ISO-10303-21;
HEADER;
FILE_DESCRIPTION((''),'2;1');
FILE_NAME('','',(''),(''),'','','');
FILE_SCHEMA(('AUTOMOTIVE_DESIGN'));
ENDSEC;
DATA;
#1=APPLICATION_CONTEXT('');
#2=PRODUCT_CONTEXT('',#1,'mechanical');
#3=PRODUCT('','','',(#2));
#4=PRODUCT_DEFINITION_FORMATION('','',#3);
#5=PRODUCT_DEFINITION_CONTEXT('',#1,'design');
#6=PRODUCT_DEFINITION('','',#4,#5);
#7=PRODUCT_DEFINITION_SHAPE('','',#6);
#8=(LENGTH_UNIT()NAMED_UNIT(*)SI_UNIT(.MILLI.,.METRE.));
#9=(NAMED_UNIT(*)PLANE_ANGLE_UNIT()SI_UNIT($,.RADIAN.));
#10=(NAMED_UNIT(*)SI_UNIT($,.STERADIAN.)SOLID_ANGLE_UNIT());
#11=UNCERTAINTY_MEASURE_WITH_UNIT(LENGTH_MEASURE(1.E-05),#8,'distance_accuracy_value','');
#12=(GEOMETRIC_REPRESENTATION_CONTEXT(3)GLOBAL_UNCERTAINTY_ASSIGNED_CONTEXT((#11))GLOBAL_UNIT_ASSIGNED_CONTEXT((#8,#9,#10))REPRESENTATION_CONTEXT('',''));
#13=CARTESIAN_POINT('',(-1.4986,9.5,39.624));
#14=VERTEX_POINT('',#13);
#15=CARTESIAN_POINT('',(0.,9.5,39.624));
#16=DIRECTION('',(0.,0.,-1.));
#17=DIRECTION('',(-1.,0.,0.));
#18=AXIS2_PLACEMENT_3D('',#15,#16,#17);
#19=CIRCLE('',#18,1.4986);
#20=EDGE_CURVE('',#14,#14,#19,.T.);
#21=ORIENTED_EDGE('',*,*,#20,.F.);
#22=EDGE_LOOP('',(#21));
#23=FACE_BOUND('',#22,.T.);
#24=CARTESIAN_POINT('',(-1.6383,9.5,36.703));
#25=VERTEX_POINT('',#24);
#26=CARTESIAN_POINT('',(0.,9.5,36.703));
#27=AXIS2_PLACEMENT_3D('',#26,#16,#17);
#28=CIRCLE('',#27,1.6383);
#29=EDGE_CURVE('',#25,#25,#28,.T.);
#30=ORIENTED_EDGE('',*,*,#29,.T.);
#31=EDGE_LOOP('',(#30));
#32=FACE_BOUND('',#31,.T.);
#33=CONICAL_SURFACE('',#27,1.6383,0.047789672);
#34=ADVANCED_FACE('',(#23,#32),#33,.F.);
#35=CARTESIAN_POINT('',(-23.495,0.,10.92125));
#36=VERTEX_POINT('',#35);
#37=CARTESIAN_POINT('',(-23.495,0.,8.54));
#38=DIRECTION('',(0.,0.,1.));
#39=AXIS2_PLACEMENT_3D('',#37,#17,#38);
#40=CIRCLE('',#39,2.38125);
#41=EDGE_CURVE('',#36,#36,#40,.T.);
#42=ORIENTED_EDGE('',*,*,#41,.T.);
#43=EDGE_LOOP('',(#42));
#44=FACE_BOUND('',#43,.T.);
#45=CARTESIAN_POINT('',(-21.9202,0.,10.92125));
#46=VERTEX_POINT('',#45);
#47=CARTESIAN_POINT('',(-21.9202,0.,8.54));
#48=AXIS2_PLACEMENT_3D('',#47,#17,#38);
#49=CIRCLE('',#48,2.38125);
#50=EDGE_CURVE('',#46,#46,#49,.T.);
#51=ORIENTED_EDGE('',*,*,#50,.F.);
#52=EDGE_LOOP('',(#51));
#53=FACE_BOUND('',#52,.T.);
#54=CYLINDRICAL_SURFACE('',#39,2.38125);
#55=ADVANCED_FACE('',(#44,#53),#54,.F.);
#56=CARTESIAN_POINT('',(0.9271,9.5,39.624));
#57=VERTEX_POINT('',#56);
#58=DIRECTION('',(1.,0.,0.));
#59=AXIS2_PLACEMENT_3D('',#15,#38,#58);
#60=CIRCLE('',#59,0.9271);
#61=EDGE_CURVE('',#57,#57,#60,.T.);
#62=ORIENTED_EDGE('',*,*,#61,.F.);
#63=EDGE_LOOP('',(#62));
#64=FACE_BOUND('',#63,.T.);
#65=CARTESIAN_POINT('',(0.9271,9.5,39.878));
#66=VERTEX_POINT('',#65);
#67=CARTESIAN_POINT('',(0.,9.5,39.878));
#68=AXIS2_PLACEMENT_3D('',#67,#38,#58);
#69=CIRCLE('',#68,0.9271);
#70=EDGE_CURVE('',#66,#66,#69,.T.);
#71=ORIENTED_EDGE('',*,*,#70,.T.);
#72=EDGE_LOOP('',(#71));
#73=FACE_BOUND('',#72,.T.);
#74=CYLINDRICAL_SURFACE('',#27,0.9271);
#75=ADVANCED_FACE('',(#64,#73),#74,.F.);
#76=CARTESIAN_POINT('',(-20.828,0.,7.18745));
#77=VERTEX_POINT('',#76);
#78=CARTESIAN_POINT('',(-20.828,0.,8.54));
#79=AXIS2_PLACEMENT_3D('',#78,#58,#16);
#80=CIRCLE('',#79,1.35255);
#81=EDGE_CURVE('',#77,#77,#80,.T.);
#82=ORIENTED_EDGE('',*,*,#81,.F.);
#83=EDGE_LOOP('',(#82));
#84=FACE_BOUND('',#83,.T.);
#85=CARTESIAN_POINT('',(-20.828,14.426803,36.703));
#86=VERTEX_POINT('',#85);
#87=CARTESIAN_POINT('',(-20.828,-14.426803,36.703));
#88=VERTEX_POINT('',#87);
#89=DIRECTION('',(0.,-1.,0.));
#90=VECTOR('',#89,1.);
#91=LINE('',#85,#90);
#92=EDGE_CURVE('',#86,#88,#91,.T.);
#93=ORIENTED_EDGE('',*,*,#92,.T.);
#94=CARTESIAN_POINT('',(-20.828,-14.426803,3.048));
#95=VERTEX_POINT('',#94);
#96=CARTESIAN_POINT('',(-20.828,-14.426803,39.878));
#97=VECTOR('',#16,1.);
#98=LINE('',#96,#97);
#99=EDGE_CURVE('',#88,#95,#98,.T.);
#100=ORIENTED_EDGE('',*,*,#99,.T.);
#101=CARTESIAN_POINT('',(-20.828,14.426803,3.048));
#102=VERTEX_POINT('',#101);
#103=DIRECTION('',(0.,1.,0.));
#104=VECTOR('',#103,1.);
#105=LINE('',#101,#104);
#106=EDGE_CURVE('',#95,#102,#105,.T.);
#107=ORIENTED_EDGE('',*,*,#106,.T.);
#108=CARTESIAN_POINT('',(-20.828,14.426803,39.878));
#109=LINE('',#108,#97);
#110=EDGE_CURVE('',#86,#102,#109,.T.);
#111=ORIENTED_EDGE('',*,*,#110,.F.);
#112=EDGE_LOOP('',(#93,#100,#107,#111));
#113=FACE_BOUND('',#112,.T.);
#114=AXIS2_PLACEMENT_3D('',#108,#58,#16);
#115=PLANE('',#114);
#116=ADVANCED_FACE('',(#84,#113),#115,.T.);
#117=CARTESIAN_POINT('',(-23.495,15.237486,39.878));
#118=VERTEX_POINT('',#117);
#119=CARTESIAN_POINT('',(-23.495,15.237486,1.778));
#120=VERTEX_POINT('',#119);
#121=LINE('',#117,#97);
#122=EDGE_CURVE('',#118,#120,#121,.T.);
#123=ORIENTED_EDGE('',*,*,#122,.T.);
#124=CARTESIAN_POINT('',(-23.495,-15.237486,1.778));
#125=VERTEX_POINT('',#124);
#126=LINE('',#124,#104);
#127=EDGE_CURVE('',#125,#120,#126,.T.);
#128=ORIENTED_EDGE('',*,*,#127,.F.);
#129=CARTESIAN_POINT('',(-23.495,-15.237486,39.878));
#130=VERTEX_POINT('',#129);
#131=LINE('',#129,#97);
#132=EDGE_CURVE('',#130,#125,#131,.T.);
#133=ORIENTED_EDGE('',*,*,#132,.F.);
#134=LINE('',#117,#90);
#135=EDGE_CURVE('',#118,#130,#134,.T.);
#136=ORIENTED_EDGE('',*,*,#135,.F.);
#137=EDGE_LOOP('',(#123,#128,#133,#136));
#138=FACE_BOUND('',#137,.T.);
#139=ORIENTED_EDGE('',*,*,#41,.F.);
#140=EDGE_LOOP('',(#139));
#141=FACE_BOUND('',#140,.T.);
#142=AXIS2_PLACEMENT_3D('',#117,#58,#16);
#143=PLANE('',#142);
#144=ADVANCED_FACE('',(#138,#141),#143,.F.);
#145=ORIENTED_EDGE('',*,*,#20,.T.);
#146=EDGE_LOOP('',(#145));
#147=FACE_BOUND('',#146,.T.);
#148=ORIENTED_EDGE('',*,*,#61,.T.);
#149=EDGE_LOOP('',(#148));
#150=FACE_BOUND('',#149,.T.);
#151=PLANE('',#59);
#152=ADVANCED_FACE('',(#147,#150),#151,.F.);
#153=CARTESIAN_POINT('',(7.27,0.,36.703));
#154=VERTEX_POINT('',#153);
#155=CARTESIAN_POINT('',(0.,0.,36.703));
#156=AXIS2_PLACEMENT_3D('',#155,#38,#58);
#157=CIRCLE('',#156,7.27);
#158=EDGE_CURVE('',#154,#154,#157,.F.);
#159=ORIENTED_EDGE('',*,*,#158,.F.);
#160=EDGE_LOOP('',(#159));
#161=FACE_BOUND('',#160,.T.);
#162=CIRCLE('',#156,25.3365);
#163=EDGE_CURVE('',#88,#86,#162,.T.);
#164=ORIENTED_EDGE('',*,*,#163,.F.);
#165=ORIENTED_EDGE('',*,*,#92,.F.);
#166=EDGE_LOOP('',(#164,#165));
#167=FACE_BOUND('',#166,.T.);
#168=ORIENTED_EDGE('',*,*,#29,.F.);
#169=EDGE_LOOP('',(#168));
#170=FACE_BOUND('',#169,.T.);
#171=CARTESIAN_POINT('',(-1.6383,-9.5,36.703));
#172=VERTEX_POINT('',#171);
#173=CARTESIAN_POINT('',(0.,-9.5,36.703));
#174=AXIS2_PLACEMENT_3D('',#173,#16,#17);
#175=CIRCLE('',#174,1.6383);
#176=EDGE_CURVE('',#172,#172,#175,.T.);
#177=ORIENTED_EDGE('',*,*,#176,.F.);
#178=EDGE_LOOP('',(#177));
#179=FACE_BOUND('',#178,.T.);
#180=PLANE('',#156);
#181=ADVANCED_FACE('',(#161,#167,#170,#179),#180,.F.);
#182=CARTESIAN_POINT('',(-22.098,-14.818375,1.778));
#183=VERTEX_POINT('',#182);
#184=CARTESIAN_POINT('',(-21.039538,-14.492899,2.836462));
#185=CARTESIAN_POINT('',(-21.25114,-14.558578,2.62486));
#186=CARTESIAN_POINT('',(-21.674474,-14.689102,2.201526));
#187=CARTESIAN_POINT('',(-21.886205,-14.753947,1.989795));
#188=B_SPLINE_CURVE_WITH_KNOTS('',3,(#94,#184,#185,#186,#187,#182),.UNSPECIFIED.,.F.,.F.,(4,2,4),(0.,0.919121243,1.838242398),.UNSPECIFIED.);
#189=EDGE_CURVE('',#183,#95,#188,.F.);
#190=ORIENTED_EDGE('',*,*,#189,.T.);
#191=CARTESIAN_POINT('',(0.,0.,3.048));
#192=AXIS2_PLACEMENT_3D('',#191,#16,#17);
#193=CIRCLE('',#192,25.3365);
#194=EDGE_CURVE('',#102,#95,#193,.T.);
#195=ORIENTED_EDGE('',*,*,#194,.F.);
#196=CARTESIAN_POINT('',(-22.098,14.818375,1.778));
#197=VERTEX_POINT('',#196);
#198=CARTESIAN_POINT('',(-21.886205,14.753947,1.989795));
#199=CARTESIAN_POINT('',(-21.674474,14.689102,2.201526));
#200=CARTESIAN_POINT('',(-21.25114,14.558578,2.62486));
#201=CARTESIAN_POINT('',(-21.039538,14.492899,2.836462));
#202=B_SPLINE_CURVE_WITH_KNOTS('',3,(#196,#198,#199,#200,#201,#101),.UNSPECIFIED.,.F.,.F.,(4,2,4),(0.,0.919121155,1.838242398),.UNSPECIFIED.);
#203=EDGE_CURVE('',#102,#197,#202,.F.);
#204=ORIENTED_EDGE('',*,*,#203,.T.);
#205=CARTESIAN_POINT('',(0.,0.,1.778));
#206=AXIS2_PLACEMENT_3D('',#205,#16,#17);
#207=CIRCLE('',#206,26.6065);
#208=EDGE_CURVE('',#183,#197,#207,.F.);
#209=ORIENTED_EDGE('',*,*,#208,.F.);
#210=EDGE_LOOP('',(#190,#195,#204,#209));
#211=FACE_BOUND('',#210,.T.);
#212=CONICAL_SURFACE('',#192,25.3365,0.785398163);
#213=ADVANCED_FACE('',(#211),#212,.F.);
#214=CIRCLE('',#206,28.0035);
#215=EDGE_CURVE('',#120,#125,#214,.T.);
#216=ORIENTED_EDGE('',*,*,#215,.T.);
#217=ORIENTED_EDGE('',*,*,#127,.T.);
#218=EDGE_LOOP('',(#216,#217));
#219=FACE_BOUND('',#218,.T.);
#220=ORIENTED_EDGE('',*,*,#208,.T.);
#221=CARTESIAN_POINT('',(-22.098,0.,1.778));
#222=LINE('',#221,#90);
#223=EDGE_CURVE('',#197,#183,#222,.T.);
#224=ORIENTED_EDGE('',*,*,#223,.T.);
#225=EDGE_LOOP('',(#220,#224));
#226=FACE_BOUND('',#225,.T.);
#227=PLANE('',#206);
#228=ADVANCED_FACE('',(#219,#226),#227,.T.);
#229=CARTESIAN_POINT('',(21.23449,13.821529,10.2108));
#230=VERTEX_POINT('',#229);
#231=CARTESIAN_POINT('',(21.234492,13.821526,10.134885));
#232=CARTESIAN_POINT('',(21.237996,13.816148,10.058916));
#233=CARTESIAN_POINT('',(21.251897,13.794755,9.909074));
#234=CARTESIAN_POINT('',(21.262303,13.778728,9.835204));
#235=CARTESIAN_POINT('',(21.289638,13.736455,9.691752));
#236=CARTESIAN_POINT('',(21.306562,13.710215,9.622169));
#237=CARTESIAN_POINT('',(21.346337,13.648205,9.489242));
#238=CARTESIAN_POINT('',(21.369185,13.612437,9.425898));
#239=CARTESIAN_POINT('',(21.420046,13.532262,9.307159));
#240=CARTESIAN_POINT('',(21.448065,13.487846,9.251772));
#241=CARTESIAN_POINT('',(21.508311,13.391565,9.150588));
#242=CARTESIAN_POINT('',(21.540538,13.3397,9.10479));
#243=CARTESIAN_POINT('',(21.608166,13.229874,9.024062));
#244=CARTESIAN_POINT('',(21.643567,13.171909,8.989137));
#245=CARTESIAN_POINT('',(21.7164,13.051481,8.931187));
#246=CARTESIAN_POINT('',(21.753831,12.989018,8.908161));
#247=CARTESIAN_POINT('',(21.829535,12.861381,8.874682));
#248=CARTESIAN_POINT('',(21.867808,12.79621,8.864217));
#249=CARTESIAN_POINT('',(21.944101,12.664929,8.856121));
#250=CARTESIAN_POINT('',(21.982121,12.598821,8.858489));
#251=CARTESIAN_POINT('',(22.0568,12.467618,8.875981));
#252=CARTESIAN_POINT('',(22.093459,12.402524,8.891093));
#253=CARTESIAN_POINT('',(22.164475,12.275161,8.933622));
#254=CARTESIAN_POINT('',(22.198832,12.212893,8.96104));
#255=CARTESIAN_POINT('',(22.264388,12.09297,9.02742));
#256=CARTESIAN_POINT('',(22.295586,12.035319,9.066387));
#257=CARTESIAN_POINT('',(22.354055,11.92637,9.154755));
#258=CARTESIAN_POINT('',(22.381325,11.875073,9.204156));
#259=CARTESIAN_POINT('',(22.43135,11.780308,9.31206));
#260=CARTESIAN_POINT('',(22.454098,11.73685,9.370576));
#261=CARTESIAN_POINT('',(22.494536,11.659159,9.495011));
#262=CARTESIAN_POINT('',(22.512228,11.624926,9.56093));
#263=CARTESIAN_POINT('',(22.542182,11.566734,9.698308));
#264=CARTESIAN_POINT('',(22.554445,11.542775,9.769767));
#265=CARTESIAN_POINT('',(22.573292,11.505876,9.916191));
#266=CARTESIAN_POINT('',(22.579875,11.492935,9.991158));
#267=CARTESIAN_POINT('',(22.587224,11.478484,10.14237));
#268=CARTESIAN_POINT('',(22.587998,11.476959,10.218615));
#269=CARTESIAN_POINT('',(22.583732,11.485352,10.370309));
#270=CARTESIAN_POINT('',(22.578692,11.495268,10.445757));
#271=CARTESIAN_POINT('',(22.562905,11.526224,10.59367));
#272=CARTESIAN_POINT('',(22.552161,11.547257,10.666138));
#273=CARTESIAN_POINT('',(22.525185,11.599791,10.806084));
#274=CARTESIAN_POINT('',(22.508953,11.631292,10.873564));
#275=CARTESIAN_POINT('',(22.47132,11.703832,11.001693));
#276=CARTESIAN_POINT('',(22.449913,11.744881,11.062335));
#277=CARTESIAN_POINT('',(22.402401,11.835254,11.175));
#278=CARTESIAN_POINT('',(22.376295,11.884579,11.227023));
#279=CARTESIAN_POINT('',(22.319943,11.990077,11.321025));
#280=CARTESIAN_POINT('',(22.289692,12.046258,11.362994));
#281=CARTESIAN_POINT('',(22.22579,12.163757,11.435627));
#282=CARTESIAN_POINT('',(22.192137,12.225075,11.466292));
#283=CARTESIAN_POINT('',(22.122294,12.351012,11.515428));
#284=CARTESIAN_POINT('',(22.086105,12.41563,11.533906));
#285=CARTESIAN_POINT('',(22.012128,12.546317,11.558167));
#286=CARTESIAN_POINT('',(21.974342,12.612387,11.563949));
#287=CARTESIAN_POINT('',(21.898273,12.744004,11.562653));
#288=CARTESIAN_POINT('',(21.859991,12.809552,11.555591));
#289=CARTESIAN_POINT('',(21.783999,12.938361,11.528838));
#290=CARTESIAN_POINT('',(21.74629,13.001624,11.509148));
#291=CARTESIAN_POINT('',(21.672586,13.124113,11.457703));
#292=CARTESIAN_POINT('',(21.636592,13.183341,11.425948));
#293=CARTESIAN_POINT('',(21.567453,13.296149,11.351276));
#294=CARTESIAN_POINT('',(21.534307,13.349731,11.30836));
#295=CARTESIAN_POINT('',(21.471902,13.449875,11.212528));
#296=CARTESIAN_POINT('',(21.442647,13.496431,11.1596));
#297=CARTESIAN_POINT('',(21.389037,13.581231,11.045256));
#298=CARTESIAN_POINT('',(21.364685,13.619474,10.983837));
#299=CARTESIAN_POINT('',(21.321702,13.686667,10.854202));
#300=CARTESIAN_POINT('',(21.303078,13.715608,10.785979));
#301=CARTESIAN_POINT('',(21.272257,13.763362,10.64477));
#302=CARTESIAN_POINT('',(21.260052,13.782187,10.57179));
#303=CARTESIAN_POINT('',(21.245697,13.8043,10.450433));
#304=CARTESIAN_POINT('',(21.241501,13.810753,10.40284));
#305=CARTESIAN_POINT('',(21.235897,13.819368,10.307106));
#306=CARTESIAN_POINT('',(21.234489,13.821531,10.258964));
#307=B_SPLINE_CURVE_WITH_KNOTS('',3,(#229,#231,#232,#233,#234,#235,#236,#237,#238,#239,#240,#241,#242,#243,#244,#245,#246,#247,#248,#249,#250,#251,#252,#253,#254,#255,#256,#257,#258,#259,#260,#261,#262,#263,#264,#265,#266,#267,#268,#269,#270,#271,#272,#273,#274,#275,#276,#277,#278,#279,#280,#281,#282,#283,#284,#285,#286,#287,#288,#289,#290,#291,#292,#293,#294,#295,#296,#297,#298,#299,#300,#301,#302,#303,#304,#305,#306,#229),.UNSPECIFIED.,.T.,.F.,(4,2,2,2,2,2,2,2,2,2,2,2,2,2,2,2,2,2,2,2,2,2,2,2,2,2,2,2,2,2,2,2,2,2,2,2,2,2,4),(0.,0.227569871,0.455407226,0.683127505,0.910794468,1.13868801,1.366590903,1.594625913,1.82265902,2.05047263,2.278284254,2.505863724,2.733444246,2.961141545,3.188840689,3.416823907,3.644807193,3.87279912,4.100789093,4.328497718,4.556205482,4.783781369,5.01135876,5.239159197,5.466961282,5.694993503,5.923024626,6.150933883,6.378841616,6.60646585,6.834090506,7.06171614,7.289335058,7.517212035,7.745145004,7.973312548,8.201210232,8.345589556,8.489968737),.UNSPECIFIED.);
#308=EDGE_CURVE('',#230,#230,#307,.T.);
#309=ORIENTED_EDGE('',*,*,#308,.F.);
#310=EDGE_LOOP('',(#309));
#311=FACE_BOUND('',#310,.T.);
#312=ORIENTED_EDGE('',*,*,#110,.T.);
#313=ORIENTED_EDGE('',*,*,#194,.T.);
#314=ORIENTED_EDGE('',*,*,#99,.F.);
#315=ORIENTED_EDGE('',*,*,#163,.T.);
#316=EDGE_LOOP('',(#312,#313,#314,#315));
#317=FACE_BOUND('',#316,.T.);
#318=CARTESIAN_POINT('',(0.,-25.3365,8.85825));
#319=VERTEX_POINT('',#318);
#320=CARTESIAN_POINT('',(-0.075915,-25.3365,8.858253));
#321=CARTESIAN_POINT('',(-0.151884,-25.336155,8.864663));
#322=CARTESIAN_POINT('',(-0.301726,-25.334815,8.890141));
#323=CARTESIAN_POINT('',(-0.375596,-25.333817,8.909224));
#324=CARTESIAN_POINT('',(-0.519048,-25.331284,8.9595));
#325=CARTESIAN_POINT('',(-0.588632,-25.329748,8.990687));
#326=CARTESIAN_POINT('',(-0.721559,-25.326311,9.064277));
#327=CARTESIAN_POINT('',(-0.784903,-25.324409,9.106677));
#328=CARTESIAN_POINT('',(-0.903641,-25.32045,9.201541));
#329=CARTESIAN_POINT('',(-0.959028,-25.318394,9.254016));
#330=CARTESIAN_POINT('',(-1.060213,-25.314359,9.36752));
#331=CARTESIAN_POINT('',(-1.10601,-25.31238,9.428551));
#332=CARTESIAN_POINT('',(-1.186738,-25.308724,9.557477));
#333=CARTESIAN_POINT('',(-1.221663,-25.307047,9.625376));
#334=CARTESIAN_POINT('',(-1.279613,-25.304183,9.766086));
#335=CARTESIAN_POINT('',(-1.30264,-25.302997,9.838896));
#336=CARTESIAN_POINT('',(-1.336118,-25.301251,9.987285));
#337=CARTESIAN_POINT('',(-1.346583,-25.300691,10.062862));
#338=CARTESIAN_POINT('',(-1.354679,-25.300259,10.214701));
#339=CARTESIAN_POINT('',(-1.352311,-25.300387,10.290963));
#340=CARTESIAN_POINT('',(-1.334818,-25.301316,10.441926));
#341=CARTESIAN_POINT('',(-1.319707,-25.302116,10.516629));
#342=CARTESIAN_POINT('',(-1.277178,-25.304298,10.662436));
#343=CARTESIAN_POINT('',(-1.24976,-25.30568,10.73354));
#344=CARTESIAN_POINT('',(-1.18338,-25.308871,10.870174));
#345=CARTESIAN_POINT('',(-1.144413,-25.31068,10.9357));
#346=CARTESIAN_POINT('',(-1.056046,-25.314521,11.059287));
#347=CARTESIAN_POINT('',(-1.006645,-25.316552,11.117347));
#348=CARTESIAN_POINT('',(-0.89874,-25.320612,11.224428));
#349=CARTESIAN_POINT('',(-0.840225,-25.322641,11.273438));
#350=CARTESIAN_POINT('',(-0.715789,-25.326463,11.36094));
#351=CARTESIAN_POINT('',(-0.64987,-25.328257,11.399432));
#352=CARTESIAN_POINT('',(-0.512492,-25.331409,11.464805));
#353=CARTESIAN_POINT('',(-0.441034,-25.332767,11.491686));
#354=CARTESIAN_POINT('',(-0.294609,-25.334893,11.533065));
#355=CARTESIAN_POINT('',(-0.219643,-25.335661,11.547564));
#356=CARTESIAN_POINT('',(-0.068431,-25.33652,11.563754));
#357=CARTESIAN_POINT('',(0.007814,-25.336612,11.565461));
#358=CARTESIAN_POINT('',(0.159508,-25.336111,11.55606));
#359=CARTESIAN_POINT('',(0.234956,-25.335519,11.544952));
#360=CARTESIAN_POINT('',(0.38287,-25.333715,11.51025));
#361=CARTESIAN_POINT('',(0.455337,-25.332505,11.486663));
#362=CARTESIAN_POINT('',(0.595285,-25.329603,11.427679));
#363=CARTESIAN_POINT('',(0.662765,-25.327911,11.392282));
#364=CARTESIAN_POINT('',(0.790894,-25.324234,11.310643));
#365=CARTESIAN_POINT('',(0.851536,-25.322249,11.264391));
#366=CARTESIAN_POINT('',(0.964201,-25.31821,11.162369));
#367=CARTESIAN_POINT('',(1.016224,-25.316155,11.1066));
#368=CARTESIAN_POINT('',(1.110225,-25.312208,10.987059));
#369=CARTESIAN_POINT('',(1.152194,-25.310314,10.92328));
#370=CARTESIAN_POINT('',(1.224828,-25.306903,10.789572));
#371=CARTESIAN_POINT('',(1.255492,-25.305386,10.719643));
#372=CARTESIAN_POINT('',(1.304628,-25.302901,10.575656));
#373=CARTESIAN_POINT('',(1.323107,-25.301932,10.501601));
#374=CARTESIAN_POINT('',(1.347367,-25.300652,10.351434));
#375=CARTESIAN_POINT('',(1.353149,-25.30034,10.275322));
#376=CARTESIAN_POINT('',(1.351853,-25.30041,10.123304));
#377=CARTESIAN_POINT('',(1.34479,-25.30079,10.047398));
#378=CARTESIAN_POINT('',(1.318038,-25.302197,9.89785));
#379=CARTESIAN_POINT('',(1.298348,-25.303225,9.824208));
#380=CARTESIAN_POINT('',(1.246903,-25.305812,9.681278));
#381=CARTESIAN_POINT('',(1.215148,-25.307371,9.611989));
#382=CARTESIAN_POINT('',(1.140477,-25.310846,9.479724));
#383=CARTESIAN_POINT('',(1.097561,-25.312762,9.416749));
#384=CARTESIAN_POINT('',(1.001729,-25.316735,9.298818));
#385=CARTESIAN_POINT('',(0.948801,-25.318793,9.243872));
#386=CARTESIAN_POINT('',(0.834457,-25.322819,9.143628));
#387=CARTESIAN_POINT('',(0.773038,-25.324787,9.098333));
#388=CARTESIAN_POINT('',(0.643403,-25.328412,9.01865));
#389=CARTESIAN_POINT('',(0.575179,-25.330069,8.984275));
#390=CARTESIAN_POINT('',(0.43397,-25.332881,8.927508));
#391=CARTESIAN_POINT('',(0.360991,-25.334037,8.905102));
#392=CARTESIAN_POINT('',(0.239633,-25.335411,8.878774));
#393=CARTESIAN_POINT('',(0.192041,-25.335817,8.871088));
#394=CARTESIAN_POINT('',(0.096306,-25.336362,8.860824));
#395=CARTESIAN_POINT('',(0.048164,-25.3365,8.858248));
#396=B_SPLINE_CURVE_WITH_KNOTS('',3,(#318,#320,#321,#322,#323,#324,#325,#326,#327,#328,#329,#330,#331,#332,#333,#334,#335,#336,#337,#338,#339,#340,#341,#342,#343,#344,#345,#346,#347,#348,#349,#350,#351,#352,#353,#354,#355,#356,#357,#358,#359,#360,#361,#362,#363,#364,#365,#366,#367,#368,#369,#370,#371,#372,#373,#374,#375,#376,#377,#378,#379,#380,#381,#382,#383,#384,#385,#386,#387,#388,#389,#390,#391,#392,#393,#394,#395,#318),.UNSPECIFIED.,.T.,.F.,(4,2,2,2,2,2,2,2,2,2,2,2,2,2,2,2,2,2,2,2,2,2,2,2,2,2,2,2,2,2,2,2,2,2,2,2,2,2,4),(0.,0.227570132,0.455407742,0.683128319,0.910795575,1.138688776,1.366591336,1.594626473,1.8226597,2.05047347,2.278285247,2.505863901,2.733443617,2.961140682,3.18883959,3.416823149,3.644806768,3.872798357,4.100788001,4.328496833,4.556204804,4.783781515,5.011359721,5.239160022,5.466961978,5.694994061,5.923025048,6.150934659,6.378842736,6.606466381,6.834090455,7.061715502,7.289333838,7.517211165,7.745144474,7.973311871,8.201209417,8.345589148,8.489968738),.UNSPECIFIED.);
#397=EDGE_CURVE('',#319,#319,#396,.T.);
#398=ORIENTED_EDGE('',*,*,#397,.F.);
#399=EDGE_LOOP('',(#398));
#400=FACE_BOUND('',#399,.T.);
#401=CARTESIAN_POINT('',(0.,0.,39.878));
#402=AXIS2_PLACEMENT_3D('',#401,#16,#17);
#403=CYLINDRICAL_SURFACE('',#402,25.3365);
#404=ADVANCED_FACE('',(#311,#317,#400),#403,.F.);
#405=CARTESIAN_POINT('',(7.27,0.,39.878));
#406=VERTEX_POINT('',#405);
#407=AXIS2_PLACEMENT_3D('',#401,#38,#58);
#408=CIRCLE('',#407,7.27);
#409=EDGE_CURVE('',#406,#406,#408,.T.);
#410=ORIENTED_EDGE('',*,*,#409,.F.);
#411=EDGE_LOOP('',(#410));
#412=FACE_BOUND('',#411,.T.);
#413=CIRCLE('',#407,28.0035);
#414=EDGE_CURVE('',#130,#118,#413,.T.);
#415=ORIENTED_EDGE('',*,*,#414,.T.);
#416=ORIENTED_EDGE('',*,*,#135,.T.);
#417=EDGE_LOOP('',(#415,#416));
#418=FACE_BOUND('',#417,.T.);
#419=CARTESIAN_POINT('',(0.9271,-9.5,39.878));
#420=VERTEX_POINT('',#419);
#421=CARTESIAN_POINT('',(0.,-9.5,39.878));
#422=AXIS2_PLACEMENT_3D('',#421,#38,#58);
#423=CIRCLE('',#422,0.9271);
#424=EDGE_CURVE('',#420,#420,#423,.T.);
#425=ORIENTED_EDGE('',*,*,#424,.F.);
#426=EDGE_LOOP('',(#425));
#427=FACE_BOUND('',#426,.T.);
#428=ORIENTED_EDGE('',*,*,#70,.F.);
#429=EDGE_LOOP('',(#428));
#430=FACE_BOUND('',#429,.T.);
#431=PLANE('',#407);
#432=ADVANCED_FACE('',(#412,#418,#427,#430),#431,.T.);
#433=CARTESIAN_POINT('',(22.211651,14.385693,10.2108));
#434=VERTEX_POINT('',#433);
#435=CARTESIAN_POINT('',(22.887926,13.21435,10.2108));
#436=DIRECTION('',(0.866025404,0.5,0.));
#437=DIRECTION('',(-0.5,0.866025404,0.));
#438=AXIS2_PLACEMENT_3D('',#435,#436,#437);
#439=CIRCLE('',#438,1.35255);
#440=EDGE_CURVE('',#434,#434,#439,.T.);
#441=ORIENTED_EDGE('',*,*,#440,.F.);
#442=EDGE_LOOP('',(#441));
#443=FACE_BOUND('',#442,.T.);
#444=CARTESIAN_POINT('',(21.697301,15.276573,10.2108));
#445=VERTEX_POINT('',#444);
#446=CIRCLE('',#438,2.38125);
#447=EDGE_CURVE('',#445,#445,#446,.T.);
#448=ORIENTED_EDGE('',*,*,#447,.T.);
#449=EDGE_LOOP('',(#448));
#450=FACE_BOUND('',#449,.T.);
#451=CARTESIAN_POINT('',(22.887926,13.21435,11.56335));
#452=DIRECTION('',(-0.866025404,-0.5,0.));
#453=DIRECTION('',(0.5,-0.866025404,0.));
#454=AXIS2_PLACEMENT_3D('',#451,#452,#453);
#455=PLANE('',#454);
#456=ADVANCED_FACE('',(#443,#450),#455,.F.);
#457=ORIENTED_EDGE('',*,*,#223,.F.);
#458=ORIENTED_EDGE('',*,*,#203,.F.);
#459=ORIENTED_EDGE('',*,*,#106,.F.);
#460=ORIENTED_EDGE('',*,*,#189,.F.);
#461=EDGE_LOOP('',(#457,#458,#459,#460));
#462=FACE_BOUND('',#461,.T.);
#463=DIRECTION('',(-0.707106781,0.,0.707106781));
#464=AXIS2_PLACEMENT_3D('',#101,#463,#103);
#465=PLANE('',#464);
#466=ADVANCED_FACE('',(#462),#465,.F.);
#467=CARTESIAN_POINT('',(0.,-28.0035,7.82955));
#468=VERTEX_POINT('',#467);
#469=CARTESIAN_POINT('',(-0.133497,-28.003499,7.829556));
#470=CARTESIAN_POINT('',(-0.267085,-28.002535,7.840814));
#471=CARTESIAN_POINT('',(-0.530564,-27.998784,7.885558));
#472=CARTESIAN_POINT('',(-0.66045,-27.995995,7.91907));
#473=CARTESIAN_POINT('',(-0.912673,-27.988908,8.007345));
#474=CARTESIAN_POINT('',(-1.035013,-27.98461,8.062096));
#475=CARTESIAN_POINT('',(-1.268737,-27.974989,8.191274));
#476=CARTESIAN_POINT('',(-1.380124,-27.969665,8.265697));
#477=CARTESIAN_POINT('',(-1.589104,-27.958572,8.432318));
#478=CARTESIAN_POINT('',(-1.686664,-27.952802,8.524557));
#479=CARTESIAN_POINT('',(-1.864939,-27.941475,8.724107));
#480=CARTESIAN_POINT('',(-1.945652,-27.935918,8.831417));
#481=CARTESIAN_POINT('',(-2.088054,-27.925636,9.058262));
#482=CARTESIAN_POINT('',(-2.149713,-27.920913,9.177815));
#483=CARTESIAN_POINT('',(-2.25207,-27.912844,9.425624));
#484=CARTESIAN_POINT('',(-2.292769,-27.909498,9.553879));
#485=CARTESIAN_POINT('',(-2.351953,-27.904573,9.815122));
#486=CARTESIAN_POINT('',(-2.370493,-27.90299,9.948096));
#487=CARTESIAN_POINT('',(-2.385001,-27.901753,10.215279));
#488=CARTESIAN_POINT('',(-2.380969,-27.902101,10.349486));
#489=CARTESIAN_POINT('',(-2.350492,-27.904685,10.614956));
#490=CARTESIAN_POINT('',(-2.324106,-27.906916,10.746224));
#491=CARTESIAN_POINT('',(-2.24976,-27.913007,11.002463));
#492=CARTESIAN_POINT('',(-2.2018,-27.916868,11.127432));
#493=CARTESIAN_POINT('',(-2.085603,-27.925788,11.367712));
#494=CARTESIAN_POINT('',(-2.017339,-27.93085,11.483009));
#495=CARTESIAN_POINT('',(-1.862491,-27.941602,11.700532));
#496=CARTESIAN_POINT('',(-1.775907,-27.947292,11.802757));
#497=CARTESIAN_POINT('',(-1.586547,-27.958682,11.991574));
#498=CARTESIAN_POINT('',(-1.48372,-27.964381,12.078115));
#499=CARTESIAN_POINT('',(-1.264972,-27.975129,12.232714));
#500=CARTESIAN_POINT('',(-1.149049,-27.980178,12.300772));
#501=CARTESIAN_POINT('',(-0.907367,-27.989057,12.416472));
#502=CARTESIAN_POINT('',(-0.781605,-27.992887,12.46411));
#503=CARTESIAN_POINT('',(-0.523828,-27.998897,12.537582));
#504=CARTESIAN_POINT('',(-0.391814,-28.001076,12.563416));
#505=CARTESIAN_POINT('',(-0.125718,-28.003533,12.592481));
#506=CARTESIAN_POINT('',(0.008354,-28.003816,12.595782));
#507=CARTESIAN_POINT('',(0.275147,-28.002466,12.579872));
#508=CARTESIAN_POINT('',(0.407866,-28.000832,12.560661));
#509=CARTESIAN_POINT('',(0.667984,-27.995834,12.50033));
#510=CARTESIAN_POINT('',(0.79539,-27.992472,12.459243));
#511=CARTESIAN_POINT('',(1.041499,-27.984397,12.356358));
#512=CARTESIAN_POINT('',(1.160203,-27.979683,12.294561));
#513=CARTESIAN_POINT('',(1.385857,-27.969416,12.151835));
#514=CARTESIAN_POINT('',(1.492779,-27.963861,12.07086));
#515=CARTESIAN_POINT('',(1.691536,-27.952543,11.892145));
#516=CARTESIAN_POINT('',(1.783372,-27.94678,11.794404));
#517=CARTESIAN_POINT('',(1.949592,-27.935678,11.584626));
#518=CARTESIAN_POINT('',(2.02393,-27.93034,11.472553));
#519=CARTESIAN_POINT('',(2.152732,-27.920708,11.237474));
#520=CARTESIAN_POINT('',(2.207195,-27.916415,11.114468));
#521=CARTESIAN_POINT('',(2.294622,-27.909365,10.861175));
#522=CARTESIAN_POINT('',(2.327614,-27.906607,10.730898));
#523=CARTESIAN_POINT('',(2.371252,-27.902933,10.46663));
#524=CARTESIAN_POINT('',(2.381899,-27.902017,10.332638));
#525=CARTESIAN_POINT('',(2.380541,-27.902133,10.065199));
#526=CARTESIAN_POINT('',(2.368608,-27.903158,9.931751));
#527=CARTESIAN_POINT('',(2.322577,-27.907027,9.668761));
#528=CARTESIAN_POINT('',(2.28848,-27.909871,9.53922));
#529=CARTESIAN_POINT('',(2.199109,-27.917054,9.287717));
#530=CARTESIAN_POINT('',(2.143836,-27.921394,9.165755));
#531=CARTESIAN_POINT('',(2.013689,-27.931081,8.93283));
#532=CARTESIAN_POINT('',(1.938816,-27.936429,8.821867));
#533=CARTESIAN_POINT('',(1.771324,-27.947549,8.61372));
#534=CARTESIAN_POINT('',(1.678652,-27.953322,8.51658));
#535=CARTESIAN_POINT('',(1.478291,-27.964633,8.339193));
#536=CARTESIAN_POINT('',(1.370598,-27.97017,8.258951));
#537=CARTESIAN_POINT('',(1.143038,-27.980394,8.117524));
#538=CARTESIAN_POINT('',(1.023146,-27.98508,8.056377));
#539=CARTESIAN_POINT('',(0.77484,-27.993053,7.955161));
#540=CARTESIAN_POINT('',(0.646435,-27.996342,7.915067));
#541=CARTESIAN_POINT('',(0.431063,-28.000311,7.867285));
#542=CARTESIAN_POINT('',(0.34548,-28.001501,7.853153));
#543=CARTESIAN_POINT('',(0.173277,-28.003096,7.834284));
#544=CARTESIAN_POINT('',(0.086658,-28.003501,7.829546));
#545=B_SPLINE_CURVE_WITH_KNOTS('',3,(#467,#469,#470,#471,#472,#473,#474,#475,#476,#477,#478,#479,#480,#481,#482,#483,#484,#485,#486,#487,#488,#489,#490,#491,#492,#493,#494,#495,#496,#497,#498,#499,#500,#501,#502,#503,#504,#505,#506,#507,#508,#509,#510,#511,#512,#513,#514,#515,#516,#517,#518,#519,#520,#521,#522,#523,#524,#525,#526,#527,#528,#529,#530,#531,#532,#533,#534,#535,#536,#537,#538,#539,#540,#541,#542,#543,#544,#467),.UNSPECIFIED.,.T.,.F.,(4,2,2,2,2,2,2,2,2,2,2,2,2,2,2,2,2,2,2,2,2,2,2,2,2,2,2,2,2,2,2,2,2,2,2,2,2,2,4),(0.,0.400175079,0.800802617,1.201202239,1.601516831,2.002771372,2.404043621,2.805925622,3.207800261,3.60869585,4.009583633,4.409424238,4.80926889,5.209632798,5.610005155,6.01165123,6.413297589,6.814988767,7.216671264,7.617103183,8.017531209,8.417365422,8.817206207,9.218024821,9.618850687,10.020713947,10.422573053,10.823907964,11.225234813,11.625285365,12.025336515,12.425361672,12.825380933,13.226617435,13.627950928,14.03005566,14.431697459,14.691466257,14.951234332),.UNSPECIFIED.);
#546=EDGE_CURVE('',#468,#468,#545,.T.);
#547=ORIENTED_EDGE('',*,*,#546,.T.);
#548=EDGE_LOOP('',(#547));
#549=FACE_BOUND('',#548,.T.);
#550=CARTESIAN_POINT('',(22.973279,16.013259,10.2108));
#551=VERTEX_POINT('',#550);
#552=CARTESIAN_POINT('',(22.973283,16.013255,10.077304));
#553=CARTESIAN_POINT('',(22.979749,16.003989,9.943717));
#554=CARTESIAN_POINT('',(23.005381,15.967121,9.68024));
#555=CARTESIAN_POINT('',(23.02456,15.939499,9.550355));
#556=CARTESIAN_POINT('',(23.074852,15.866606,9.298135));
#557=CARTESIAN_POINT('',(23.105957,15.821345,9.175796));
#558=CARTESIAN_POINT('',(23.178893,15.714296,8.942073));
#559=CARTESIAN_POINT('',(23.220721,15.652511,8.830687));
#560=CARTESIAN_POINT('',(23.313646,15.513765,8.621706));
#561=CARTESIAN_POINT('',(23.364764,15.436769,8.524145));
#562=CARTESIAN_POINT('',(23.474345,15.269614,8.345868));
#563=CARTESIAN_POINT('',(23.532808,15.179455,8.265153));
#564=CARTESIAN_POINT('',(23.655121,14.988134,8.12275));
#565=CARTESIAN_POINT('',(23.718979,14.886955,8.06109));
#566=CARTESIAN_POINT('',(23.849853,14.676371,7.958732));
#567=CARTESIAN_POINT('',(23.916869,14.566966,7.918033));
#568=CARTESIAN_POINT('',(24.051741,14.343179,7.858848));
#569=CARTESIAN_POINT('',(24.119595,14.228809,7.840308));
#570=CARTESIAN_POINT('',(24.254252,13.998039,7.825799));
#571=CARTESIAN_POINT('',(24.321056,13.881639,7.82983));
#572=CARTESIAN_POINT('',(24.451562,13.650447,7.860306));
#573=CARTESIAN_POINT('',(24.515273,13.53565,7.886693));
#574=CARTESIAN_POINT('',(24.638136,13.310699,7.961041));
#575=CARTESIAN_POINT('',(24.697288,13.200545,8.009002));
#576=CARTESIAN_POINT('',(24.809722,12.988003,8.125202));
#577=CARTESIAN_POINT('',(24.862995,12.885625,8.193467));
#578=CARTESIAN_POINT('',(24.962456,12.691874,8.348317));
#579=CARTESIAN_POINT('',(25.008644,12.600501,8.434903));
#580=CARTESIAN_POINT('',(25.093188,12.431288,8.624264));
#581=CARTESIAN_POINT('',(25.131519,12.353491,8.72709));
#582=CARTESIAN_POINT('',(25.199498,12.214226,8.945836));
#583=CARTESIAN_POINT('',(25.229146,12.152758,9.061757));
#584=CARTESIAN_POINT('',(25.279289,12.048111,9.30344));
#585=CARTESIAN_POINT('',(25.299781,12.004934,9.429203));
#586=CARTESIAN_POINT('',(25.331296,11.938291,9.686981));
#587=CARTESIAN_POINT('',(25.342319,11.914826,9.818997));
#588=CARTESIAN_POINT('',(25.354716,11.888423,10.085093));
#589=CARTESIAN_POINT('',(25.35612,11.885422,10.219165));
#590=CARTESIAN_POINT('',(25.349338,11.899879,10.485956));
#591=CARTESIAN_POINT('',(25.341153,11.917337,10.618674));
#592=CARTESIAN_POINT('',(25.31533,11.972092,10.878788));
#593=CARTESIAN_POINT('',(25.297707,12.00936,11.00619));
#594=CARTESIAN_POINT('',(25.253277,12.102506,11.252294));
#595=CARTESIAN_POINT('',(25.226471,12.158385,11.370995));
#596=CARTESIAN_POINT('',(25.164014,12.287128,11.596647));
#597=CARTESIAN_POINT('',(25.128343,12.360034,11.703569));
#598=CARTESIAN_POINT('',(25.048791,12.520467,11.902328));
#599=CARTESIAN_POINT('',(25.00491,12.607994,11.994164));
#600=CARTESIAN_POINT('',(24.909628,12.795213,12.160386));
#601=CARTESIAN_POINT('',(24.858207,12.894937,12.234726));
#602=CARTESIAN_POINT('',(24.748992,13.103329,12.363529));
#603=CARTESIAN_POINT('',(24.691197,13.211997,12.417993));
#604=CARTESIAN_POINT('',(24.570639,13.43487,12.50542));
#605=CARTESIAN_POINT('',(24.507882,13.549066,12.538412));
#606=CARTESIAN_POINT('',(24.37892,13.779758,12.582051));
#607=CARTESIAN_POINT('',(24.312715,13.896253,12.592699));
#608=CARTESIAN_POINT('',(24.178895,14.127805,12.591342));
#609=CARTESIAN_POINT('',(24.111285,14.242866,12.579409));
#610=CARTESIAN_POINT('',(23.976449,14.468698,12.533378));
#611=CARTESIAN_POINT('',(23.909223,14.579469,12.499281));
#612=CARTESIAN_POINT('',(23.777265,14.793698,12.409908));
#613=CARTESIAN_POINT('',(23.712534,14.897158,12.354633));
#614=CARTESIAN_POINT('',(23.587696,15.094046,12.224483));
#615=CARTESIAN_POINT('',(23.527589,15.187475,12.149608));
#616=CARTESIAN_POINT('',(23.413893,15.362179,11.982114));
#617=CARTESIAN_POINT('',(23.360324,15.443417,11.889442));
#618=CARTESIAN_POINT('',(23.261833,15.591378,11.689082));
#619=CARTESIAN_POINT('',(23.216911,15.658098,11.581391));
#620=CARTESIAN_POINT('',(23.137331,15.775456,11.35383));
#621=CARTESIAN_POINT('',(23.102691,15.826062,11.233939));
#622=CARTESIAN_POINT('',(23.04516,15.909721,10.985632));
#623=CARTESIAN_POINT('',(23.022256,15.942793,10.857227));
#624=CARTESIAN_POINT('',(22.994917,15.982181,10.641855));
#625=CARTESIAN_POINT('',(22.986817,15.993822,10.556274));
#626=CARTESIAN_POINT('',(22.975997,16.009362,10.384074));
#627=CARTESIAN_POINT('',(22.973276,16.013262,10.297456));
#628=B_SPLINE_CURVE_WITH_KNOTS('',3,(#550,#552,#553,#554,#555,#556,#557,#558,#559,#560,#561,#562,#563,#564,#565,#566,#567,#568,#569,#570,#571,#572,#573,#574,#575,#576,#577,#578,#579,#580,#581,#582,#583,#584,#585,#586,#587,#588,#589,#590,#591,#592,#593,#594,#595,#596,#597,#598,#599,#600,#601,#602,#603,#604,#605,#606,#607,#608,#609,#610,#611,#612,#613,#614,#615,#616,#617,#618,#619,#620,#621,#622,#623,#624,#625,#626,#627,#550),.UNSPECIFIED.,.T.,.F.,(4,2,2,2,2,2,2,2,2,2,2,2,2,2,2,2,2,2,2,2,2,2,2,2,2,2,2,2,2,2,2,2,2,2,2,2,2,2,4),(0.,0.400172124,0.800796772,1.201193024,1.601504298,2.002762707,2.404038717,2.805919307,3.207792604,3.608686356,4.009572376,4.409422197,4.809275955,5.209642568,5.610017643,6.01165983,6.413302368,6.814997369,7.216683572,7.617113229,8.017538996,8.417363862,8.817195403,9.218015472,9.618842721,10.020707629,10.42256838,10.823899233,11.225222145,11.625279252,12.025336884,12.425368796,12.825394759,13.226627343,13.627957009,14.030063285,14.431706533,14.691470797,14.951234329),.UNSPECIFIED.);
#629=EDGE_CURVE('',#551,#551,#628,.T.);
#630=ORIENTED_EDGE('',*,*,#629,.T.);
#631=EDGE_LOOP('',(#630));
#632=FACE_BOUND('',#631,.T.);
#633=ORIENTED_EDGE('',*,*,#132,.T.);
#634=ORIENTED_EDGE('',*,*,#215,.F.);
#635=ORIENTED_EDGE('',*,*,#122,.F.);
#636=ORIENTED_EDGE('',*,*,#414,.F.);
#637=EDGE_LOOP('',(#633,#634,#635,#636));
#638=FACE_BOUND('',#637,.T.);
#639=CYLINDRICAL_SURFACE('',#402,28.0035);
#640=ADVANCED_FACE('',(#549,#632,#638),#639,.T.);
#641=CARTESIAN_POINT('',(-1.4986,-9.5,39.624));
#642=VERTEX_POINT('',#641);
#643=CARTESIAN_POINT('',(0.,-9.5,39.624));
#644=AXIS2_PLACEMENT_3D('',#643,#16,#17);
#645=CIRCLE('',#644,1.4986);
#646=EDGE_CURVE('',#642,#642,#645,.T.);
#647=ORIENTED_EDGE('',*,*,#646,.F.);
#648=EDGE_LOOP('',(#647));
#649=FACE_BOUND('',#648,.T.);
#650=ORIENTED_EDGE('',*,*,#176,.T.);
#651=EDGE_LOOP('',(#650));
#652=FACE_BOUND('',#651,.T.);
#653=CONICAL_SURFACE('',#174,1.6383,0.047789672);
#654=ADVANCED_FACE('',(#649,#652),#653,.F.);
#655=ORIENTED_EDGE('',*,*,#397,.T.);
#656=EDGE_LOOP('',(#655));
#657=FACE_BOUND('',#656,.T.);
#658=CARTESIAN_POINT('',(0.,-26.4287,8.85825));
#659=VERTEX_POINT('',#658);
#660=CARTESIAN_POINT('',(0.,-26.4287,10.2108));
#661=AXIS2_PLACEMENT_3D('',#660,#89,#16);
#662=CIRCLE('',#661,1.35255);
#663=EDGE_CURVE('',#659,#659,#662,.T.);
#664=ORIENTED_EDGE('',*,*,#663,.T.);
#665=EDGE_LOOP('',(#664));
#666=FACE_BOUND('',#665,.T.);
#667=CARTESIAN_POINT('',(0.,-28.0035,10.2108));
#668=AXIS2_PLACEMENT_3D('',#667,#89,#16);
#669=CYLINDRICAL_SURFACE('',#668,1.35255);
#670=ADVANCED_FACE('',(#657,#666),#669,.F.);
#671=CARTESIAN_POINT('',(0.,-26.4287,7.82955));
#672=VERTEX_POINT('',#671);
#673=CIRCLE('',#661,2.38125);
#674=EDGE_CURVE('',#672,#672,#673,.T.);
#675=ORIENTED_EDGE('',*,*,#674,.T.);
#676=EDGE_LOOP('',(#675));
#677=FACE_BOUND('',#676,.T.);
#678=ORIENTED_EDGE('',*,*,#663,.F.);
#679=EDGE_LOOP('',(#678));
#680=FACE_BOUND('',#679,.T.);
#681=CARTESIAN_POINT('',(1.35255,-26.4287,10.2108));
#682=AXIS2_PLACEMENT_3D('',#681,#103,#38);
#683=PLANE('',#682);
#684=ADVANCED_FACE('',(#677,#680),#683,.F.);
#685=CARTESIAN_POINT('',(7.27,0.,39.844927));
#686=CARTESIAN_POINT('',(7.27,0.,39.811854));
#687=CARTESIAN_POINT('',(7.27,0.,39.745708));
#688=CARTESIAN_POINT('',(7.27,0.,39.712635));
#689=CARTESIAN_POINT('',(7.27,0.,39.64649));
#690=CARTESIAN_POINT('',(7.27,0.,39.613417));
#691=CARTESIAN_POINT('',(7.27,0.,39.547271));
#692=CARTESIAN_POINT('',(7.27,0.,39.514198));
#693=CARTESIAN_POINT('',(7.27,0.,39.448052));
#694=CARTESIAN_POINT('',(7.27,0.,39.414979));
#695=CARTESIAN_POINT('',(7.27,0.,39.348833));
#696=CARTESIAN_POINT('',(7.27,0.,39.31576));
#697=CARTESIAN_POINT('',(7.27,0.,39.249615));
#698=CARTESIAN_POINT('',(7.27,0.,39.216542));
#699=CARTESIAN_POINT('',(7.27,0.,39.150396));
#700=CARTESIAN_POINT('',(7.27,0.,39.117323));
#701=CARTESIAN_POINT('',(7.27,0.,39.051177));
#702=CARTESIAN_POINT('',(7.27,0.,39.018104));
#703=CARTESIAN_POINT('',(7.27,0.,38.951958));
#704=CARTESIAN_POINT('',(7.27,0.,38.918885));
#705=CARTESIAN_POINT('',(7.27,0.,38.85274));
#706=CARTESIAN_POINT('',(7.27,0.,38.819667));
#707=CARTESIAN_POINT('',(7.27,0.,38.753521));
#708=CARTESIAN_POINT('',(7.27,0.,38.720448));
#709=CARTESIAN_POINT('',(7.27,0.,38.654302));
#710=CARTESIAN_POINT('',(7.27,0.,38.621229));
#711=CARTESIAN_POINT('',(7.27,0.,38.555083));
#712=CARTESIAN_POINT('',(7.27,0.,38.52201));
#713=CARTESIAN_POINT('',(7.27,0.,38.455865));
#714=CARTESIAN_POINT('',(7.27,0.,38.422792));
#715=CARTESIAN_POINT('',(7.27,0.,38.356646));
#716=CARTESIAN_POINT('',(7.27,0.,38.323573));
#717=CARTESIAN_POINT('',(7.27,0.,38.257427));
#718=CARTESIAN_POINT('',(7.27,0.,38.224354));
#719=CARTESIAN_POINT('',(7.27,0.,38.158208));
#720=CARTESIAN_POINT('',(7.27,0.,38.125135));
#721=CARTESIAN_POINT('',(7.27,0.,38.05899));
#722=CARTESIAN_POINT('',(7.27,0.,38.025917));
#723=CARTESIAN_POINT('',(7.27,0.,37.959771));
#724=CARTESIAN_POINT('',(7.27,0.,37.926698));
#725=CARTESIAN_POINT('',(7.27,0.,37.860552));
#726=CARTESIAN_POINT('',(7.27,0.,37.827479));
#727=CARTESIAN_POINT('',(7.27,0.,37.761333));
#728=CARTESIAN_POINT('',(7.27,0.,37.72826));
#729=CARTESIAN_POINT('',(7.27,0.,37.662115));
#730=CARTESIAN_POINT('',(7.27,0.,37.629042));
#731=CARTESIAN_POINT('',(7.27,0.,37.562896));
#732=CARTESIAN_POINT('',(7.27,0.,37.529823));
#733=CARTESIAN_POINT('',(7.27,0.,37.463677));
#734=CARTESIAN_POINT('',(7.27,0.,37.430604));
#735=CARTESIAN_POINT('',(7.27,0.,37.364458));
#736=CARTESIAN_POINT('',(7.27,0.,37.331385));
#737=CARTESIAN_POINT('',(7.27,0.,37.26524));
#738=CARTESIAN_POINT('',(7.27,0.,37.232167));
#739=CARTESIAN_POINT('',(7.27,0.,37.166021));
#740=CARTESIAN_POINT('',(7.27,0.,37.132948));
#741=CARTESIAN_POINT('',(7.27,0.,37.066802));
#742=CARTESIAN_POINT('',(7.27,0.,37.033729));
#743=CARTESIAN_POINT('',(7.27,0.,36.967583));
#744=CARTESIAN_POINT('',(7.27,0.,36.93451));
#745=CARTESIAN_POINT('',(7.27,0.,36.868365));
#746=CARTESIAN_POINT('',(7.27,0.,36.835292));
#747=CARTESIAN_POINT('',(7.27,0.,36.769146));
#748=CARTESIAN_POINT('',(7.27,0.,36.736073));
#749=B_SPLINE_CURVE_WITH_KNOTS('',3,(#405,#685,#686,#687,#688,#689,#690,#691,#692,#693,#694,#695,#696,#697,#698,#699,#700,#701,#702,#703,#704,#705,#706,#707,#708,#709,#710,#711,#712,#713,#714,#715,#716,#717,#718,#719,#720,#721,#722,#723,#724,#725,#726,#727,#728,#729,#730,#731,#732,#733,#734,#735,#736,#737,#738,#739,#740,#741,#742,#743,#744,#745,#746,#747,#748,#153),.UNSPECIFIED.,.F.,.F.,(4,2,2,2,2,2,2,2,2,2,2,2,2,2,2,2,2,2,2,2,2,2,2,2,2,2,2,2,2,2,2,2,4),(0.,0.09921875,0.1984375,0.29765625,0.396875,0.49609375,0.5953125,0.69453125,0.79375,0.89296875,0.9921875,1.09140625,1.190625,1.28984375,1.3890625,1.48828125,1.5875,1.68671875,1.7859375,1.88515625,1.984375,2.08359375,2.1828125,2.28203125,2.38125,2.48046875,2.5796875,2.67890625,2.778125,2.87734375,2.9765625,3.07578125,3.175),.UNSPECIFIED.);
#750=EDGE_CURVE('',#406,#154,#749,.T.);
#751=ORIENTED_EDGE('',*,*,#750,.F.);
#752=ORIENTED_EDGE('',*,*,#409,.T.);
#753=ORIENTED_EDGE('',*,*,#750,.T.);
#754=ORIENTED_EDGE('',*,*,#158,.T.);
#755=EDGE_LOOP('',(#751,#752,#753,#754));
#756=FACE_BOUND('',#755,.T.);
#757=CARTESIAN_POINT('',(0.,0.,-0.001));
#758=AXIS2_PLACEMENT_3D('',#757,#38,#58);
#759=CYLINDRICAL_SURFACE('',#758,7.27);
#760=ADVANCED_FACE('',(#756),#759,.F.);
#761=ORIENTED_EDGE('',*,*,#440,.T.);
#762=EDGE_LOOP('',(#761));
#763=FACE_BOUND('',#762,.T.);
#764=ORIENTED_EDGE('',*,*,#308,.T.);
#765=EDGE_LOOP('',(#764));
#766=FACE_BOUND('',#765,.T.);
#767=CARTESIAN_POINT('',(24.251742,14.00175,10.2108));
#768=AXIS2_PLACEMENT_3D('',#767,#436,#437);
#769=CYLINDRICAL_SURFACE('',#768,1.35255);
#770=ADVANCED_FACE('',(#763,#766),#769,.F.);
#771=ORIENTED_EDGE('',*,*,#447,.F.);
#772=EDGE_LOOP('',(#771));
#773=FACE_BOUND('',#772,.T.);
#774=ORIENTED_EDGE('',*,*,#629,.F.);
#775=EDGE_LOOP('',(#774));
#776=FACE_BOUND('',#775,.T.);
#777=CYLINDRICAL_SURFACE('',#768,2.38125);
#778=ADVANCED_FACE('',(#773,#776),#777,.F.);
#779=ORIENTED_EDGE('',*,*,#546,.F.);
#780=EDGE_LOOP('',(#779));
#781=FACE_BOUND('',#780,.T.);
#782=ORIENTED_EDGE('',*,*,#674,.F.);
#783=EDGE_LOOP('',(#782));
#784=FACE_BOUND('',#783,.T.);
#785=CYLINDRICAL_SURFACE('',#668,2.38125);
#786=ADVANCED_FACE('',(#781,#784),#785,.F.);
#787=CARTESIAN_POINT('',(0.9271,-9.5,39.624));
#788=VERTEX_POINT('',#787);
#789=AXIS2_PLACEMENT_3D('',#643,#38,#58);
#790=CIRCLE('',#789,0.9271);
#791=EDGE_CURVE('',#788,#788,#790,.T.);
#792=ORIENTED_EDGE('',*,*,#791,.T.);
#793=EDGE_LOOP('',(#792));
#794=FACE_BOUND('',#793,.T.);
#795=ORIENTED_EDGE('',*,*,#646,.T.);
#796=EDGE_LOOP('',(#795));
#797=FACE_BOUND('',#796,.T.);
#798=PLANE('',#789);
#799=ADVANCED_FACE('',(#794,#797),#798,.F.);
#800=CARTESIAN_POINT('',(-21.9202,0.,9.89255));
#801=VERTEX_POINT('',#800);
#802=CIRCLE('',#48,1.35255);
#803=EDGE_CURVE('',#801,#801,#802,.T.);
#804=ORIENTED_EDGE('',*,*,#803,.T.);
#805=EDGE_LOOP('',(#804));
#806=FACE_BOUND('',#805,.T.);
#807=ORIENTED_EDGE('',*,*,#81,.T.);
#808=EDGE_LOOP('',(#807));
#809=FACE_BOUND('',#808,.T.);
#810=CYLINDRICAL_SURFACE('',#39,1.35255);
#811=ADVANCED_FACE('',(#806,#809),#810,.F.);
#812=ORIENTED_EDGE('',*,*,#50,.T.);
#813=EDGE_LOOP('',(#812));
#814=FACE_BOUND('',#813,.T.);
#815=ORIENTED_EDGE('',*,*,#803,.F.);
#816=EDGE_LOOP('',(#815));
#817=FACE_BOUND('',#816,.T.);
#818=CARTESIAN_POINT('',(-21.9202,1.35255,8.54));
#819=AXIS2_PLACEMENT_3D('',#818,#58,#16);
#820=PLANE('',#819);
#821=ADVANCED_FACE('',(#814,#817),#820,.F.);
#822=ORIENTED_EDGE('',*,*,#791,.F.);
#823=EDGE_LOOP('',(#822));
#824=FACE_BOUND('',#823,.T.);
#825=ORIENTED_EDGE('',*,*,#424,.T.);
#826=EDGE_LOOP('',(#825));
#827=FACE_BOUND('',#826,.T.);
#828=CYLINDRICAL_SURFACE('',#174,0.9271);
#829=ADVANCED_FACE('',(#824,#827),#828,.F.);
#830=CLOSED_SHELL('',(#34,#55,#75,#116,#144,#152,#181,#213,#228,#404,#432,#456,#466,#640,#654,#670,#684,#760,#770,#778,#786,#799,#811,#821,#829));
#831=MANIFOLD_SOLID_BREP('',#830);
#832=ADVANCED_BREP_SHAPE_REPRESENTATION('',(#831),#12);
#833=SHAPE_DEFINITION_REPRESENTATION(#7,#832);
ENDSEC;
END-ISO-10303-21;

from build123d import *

# Parameters (mm, degrees)
BOSS_EXTRUDE1_DEPTH                             = 39.878
BOSS_EXTRUDE2_START                             = -3.175
BOSS_EXTRUDE2_DEPTH                             = 3.175
CBORE_FOR_2_PAN_HEAD_MACHINE_SCREW1_D           = 2.7051
CBORE_FOR_2_PAN_HEAD_MACHINE_SCREW1_DEPTH       = 2.667
CBORE_FOR_2_PAN_HEAD_MACHINE_SCREW1_CBORE_D     = 4.7625
CBORE_FOR_2_PAN_HEAD_MACHINE_SCREW1_CBORE_DEPTH = 1.5748
CBORE_START                                     = 26.4287
CBORE_FOR_2_PAN_HEAD_MACHINE_SCREW2_OUT_R       = 2.38125
CBORE_FOR_2_PAN_HEAD_MACHINE_SCREW2_DEPTH       = 1.574800075
CBORE_START_2                                   = 25.300372244
CBORE_FOR_2_PAN_HEAD_MACHINE_SCREW2_2_O_R       = 1.35255
CBORE_FOR_2_PAN_HEAD_MACHINE_SCREW2_2_DEPTH     = 1.128327756
CBORE_START_3                                   = -28.003500101
CBORE_FOR_2_PAN_HEAD_MACHINE_SCREW3_OUT_R       = 2.38125
CBORE_FOR_2_PAN_HEAD_MACHINE_SCREW3_DEPTH       = 1.574800101
CBORE_START_4                                   = -26.4287
CBORE_FOR_2_PAN_HEAD_MACHINE_SCREW3_2_O_R       = 1.35255
CBORE_FOR_2_PAN_HEAD_MACHINE_SCREW3_2_DEPTH     = 1.128327733
CUT_EXTRUDE1_REACH                              = 58.202
SKETCH20_R                                      = 7.27
HOLE1_AT_2_COUNT                                = 2
HOLE1_AT_2_PITCH                                = 19
F_0_CLEARANCE_HOLE1_D                           = 1.8542
CUT_EXTRUDE2_DEPTH                              = 1.778
CHAMFER1_SIZE                                   = 1.27


# Read off the part's stored shape, not the designer's step: CBORE for #2 Pan Head Machine Screw2, CBORE for #2 Pan Head Machine Screw3
with BuildPart() as part:
    # Sketch1 → Boss-Extrude1 (new body)
    with BuildSketch(Plane.XY):
        with BuildLine():
            Line((-23.495, 15.237486251), (-23.495, -15.237486251))
            ThreePointArc((-23.495, -15.237486251), (28.0035, 0), (-23.495, 15.237486251))
        make_face()
        with BuildLine():
            Line((-20.828, 14.42680312), (-20.828, -14.42680312))
            ThreePointArc((-20.828, -14.42680312), (25.3365, 0), (-20.828, 14.42680312))
        make_face(mode=Mode.SUBTRACT)
    extrude(amount=BOSS_EXTRUDE1_DEPTH)

    # Sketch10 → Boss-Extrude2 (add)
    with BuildSketch(Plane.XY.offset(39.878).offset(BOSS_EXTRUDE2_START)):
        with BuildLine():
            Line((-23.495, 15.237486251), (-23.495, -15.237486251))
            ThreePointArc((-23.495, -15.237486251), (28.0035, 0), (-23.495, 15.237486251))
        make_face()
    extrude(amount=BOSS_EXTRUDE2_DEPTH)

    # CBORE for #2 Pan Head Machine Screw1
    with Locations(Plane(origin=(-23.495, 13.798981486, 10.2108), x_dir=(0, 0, -1), z_dir=(-1, 0, 0))):
        with Locations((1.6708, 13.798981486)):
            CounterBoreHole(CBORE_FOR_2_PAN_HEAD_MACHINE_SCREW1_D / 2, CBORE_FOR_2_PAN_HEAD_MACHINE_SCREW1_CBORE_D / 2, CBORE_FOR_2_PAN_HEAD_MACHINE_SCREW1_CBORE_DEPTH, depth=CBORE_FOR_2_PAN_HEAD_MACHINE_SCREW1_DEPTH)

    # CBORE for #2 Pan Head Machine Screw2 out → CBORE for #2 Pan Head Machine Screw2 (cut)
    with BuildSketch(Plane(origin=(0, 0, 0), x_dir=(0.500000000000004, -0.8660254037844363, 0), z_dir=(0.8660254037844363, 0.5000000000000042, 0)).offset(CBORE_START)):
        with Locations((0, -10.2108)):
            Circle(CBORE_FOR_2_PAN_HEAD_MACHINE_SCREW2_OUT_R)
    extrude(amount=CBORE_FOR_2_PAN_HEAD_MACHINE_SCREW2_DEPTH, mode=Mode.SUBTRACT)

    # CBORE for _2 Pan Head Machine Screw2 2 o → CBORE for _2 Pan Head Machine Screw2 2 (cut)
    with BuildSketch(Plane(origin=(0, 0, 0), x_dir=(0.500000000000004, -0.8660254037844363, 0), z_dir=(0.8660254037844363, 0.5000000000000042, 0)).offset(CBORE_START_2)):
        with Locations((0, -10.2108)):
            Circle(CBORE_FOR_2_PAN_HEAD_MACHINE_SCREW2_2_O_R)
    extrude(amount=CBORE_FOR_2_PAN_HEAD_MACHINE_SCREW2_2_DEPTH, mode=Mode.SUBTRACT)

    # CBORE for #2 Pan Head Machine Screw3 out → CBORE for #2 Pan Head Machine Screw3 (cut)
    with BuildSketch(Plane(origin=(0, 0, 0), x_dir=(1, 0, 0), z_dir=(0, 1, 0)).offset(CBORE_START_3)):
        with Locations((0, -10.2108)):
            Circle(CBORE_FOR_2_PAN_HEAD_MACHINE_SCREW3_OUT_R)
    extrude(amount=CBORE_FOR_2_PAN_HEAD_MACHINE_SCREW3_DEPTH, mode=Mode.SUBTRACT)

    # CBORE for _2 Pan Head Machine Screw3 2 o → CBORE for _2 Pan Head Machine Screw3 2 (cut)
    with BuildSketch(Plane(origin=(0, 0, 0), x_dir=(1, 0, 0), z_dir=(0, 1, 0)).offset(CBORE_START_4)):
        with Locations((0, -10.2108)):
            Circle(CBORE_FOR_2_PAN_HEAD_MACHINE_SCREW3_2_O_R)
    extrude(amount=CBORE_FOR_2_PAN_HEAD_MACHINE_SCREW3_2_DEPTH, mode=Mode.SUBTRACT)

    # Sketch20 → Cut-Extrude1 (cut, up to next)
    with BuildSketch(Plane.XY.offset(39.878), mode=Mode.PRIVATE) as cut_extrude1_sk1:
        Circle(SKETCH20_R)
    cut_extrude1_tool1 = extrude(cut_extrude1_sk1.sketch, amount=-CUT_EXTRUDE1_REACH, mode=Mode.PRIVATE) & part.part
    add(cut_extrude1_tool1.solids().sort_by_distance((0, 0, 39.878))[0], mode=Mode.SUBTRACT)

    # Sketch22 → Hole1 (revolve, cut)
    with BuildSketch(Plane(origin=(0, 9.5, 36.703), x_dir=(0, 1, 0), z_dir=(1, 0, 0))):
        Polygon((0, 0), (0, 2.921), (1.4986, 2.921), (1.6383, 0), align=None)
    hole1 = revolve(axis=Axis((0, 9.5, 146.703), (0, 0, -1)), mode=Mode.SUBTRACT)

    # Hole1 at 2: Hole1 ×2
    with Locations(*[(0, -i * HOLE1_AT_2_PITCH, 0) for i in range(1, HOLE1_AT_2_COUNT)]):
        add(hole1, mode=Mode.SUBTRACT)

    # #0 Clearance Hole1 (through all)
    with Locations(Plane(origin=(0, 0, 36.703), x_dir=(-1, 0, 0), z_dir=(0, 0, -1))):
        with Locations((0, 9.5), (0, -9.5)):
            Hole(F_0_CLEARANCE_HOLE1_D / 2)

    # Sketch25 → Cut-Extrude2 (cut)
    with BuildSketch(Plane(origin=(0, 0, 0), x_dir=(-1, 0, 0), z_dir=(0, 0, -1))):
        with BuildLine():
            Line((23.495, -15.237486251), (23.495, 15.237486251))
            ThreePointArc((23.495, 15.237486251), (-28.0035, 0), (23.495, -15.237486251))
        make_face()
        with BuildLine():
            Line((20.828, -14.42680312), (20.828, 14.42680312))
            ThreePointArc((20.828, 14.42680312), (-25.3365, 0), (20.828, -14.42680312))
        make_face(mode=Mode.SUBTRACT)
    extrude(amount=-CUT_EXTRUDE2_DEPTH, mode=Mode.SUBTRACT)

    # Chamfer1
    chamfer1_edges = [part.edges().sort_by_distance(p)[0] for p in [
        (-20.828, 0, 1.778),
        (25.3365, 0, 1.778),
    ]]
    chamfer(chamfer1_edges, length=CHAMFER1_SIZE)


solid = part.part
